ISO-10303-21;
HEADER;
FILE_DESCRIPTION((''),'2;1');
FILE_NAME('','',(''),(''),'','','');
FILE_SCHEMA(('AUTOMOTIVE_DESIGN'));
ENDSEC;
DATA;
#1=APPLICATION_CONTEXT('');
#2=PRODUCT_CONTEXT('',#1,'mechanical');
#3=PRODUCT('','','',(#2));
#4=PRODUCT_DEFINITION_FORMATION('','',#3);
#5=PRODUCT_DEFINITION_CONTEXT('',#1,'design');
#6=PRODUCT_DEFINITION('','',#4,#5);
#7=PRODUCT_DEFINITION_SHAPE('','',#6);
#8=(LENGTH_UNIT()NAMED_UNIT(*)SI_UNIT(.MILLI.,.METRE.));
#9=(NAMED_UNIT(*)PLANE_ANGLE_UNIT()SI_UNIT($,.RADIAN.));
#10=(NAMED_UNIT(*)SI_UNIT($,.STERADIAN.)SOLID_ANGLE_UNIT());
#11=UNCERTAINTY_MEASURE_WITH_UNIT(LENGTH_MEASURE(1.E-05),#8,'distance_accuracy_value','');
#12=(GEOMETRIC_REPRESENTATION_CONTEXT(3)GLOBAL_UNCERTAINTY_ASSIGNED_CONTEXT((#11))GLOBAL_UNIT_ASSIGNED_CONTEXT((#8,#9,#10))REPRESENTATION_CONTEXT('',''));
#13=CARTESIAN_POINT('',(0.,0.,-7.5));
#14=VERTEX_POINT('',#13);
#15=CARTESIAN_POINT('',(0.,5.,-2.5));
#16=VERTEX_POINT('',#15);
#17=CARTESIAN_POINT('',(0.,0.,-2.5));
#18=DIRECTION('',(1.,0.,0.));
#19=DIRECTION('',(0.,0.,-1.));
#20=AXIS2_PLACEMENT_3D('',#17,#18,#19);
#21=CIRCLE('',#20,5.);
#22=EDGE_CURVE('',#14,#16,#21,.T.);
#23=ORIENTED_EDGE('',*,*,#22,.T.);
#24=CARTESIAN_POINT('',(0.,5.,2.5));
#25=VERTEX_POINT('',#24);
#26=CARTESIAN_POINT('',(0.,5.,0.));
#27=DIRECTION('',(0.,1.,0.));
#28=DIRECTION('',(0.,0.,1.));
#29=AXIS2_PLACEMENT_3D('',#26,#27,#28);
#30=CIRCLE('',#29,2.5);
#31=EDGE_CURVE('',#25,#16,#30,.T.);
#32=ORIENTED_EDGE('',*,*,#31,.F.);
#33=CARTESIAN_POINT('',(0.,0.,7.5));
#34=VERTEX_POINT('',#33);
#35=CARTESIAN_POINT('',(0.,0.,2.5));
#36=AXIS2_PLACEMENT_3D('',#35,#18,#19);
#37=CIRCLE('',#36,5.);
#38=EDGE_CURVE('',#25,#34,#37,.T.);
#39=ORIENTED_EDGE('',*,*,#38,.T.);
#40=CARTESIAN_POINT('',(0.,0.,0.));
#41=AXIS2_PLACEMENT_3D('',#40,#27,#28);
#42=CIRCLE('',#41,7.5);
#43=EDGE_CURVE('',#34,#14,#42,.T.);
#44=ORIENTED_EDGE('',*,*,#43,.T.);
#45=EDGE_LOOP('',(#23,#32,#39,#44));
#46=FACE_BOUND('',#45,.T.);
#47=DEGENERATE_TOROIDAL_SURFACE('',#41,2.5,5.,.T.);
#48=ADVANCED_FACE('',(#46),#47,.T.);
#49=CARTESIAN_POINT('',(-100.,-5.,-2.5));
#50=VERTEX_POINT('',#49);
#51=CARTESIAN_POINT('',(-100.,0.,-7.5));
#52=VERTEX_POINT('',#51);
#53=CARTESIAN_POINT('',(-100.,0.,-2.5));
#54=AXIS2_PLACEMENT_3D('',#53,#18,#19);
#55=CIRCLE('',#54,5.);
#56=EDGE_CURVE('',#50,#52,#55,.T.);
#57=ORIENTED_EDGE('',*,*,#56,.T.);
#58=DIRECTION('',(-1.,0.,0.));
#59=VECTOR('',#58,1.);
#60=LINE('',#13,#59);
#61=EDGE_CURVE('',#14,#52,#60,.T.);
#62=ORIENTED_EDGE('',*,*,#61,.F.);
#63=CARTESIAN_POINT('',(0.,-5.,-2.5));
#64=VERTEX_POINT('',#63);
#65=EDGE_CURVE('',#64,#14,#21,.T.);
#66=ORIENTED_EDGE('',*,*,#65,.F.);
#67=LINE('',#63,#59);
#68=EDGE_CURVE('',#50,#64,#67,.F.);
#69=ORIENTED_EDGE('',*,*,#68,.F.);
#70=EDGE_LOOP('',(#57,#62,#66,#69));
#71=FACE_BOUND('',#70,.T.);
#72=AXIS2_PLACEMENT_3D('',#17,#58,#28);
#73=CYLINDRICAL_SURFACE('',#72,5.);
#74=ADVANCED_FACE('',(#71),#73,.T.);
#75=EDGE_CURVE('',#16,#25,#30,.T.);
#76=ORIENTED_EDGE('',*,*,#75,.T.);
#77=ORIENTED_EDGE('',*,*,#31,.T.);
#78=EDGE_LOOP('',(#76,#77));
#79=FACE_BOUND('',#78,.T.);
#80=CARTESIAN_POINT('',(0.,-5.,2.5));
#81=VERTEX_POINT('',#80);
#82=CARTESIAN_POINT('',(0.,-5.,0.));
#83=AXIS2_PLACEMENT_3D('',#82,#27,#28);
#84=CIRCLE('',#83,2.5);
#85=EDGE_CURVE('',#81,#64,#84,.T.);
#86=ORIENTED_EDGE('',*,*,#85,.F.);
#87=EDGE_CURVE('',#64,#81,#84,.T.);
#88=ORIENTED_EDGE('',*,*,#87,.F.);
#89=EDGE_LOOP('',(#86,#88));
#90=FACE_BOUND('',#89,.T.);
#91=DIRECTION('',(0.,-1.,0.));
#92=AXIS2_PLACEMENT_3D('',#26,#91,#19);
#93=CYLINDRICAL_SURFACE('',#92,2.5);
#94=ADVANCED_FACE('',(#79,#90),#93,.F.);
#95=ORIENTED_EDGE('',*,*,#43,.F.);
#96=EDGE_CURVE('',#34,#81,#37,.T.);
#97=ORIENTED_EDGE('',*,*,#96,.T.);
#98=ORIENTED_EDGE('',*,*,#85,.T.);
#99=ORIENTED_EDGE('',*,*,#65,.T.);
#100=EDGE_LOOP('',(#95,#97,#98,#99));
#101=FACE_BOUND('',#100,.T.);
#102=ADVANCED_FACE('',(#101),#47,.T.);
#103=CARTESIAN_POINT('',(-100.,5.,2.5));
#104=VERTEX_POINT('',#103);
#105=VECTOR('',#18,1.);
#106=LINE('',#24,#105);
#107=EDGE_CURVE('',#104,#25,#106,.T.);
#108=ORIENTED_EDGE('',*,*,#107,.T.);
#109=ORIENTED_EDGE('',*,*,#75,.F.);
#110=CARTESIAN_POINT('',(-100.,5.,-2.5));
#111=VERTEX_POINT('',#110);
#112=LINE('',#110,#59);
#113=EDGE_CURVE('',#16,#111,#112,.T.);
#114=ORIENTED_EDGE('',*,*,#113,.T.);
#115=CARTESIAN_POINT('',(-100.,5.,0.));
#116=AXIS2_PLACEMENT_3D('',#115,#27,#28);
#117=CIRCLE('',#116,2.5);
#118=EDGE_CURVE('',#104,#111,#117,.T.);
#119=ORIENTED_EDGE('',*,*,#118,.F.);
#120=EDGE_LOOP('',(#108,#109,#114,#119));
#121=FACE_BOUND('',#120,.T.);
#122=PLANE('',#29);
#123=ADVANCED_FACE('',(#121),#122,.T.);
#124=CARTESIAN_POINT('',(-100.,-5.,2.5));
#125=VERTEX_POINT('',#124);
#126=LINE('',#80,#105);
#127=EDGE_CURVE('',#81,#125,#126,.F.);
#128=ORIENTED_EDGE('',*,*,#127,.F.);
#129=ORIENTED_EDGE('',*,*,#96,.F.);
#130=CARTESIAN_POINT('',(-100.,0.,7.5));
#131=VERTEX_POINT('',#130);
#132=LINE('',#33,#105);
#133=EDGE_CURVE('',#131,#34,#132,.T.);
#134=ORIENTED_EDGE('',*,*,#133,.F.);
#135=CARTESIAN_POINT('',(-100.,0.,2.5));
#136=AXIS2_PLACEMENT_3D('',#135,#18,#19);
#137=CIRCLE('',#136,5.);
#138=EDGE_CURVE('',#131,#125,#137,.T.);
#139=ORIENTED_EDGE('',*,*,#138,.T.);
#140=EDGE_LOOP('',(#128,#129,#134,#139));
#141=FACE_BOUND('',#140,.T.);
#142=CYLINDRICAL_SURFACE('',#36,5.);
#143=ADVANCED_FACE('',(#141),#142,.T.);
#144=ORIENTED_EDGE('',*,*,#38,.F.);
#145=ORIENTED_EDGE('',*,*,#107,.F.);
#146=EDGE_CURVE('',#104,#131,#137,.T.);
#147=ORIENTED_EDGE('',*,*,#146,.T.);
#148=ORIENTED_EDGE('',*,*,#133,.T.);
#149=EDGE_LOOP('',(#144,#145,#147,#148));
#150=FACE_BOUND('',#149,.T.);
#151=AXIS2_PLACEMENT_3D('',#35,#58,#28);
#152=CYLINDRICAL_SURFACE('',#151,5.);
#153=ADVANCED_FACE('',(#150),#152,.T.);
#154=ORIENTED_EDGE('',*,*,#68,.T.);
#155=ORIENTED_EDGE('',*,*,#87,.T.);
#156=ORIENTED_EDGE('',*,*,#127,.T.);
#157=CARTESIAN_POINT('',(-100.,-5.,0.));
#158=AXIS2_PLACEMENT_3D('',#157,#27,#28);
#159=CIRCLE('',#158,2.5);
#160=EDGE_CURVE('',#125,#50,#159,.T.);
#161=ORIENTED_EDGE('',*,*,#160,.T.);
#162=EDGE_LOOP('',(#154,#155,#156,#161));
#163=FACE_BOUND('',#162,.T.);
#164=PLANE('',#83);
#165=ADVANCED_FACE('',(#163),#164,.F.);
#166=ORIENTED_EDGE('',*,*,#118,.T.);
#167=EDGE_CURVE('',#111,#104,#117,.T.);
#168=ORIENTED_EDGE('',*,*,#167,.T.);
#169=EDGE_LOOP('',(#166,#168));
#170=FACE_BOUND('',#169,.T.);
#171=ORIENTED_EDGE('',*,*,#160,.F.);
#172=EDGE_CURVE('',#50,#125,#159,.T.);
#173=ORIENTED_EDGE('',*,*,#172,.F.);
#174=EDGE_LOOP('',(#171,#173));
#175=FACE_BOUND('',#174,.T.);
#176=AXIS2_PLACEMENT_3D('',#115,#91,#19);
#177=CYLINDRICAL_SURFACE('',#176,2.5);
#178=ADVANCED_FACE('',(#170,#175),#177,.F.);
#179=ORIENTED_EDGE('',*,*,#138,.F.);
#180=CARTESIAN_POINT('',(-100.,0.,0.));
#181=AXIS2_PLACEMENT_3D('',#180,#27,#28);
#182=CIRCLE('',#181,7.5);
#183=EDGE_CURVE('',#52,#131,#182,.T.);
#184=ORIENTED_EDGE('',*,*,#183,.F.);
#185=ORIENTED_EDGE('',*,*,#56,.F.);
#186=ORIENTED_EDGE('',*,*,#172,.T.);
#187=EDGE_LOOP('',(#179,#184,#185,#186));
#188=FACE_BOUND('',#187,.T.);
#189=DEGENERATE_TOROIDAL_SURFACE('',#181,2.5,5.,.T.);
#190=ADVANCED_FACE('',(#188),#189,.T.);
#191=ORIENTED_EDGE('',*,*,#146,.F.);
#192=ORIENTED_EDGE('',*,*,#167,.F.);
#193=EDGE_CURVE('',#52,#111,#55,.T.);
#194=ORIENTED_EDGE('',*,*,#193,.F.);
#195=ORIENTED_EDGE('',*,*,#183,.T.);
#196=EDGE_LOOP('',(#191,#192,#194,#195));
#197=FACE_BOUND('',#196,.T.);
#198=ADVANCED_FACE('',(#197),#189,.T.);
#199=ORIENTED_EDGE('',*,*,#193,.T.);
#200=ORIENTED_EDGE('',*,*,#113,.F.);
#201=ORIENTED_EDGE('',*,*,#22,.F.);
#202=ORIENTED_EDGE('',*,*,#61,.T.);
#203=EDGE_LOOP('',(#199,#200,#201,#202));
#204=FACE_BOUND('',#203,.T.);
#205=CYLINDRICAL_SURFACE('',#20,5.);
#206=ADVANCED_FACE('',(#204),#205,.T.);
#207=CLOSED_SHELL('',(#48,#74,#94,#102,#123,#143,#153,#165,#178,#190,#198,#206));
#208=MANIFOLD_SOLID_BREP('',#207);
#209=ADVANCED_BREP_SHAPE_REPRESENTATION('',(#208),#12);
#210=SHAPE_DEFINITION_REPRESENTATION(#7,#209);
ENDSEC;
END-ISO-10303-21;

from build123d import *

# Parameters (mm, degrees)
CROQUIS1_R              = 2.5
SALIENTE_EXTRUIR1_DEPTH = 5
REDONDEO1_R             = 5


with BuildPart() as part:
    # Croquis1 → Saliente-Extruir1 (new, symmetric)
    with BuildSketch(Plane(origin=(0, 0, 0), x_dir=(-1, 0, 0), z_dir=(0, 1, 0))):
        with BuildLine():
            Line((0, 7.5), (100, 7.5))
            ThreePointArc((100, 7.5), (107.5, 0), (100, -7.5))
            Line((100, -7.5), (0, -7.5))
            ThreePointArc((0, -7.5), (-7.5, 0), (0, 7.5))
        make_face()
        with Locations(Location((0, 0, 0), (0, 0, 90))):
            Circle(CROQUIS1_R, mode=Mode.SUBTRACT)
        with Locations(Location((100, 0, 0), (0, 0, 90))):
            Circle(CROQUIS1_R, mode=Mode.SUBTRACT)
    extrude(amount=SALIENTE_EXTRUIR1_DEPTH, both=True)

    # Redondeo1
    redondeo1_edges = [part.edges().sort_by_distance(p)[0] for p in [
        (7.5, 5, 0),
        (-50, 5, 7.5),
        (-107.5, 5, 0),
        (7.5, -5, 0),
        (-50, -5, 7.5),
        (-107.5, -5, 0),
        (-50, 5, -7.5),
        (-50, -5, -7.5),
    ]]
    fillet(redondeo1_edges, radius=REDONDEO1_R - 0.0001)  # a hair under: the kernel refuses the full size


solid = part.part
